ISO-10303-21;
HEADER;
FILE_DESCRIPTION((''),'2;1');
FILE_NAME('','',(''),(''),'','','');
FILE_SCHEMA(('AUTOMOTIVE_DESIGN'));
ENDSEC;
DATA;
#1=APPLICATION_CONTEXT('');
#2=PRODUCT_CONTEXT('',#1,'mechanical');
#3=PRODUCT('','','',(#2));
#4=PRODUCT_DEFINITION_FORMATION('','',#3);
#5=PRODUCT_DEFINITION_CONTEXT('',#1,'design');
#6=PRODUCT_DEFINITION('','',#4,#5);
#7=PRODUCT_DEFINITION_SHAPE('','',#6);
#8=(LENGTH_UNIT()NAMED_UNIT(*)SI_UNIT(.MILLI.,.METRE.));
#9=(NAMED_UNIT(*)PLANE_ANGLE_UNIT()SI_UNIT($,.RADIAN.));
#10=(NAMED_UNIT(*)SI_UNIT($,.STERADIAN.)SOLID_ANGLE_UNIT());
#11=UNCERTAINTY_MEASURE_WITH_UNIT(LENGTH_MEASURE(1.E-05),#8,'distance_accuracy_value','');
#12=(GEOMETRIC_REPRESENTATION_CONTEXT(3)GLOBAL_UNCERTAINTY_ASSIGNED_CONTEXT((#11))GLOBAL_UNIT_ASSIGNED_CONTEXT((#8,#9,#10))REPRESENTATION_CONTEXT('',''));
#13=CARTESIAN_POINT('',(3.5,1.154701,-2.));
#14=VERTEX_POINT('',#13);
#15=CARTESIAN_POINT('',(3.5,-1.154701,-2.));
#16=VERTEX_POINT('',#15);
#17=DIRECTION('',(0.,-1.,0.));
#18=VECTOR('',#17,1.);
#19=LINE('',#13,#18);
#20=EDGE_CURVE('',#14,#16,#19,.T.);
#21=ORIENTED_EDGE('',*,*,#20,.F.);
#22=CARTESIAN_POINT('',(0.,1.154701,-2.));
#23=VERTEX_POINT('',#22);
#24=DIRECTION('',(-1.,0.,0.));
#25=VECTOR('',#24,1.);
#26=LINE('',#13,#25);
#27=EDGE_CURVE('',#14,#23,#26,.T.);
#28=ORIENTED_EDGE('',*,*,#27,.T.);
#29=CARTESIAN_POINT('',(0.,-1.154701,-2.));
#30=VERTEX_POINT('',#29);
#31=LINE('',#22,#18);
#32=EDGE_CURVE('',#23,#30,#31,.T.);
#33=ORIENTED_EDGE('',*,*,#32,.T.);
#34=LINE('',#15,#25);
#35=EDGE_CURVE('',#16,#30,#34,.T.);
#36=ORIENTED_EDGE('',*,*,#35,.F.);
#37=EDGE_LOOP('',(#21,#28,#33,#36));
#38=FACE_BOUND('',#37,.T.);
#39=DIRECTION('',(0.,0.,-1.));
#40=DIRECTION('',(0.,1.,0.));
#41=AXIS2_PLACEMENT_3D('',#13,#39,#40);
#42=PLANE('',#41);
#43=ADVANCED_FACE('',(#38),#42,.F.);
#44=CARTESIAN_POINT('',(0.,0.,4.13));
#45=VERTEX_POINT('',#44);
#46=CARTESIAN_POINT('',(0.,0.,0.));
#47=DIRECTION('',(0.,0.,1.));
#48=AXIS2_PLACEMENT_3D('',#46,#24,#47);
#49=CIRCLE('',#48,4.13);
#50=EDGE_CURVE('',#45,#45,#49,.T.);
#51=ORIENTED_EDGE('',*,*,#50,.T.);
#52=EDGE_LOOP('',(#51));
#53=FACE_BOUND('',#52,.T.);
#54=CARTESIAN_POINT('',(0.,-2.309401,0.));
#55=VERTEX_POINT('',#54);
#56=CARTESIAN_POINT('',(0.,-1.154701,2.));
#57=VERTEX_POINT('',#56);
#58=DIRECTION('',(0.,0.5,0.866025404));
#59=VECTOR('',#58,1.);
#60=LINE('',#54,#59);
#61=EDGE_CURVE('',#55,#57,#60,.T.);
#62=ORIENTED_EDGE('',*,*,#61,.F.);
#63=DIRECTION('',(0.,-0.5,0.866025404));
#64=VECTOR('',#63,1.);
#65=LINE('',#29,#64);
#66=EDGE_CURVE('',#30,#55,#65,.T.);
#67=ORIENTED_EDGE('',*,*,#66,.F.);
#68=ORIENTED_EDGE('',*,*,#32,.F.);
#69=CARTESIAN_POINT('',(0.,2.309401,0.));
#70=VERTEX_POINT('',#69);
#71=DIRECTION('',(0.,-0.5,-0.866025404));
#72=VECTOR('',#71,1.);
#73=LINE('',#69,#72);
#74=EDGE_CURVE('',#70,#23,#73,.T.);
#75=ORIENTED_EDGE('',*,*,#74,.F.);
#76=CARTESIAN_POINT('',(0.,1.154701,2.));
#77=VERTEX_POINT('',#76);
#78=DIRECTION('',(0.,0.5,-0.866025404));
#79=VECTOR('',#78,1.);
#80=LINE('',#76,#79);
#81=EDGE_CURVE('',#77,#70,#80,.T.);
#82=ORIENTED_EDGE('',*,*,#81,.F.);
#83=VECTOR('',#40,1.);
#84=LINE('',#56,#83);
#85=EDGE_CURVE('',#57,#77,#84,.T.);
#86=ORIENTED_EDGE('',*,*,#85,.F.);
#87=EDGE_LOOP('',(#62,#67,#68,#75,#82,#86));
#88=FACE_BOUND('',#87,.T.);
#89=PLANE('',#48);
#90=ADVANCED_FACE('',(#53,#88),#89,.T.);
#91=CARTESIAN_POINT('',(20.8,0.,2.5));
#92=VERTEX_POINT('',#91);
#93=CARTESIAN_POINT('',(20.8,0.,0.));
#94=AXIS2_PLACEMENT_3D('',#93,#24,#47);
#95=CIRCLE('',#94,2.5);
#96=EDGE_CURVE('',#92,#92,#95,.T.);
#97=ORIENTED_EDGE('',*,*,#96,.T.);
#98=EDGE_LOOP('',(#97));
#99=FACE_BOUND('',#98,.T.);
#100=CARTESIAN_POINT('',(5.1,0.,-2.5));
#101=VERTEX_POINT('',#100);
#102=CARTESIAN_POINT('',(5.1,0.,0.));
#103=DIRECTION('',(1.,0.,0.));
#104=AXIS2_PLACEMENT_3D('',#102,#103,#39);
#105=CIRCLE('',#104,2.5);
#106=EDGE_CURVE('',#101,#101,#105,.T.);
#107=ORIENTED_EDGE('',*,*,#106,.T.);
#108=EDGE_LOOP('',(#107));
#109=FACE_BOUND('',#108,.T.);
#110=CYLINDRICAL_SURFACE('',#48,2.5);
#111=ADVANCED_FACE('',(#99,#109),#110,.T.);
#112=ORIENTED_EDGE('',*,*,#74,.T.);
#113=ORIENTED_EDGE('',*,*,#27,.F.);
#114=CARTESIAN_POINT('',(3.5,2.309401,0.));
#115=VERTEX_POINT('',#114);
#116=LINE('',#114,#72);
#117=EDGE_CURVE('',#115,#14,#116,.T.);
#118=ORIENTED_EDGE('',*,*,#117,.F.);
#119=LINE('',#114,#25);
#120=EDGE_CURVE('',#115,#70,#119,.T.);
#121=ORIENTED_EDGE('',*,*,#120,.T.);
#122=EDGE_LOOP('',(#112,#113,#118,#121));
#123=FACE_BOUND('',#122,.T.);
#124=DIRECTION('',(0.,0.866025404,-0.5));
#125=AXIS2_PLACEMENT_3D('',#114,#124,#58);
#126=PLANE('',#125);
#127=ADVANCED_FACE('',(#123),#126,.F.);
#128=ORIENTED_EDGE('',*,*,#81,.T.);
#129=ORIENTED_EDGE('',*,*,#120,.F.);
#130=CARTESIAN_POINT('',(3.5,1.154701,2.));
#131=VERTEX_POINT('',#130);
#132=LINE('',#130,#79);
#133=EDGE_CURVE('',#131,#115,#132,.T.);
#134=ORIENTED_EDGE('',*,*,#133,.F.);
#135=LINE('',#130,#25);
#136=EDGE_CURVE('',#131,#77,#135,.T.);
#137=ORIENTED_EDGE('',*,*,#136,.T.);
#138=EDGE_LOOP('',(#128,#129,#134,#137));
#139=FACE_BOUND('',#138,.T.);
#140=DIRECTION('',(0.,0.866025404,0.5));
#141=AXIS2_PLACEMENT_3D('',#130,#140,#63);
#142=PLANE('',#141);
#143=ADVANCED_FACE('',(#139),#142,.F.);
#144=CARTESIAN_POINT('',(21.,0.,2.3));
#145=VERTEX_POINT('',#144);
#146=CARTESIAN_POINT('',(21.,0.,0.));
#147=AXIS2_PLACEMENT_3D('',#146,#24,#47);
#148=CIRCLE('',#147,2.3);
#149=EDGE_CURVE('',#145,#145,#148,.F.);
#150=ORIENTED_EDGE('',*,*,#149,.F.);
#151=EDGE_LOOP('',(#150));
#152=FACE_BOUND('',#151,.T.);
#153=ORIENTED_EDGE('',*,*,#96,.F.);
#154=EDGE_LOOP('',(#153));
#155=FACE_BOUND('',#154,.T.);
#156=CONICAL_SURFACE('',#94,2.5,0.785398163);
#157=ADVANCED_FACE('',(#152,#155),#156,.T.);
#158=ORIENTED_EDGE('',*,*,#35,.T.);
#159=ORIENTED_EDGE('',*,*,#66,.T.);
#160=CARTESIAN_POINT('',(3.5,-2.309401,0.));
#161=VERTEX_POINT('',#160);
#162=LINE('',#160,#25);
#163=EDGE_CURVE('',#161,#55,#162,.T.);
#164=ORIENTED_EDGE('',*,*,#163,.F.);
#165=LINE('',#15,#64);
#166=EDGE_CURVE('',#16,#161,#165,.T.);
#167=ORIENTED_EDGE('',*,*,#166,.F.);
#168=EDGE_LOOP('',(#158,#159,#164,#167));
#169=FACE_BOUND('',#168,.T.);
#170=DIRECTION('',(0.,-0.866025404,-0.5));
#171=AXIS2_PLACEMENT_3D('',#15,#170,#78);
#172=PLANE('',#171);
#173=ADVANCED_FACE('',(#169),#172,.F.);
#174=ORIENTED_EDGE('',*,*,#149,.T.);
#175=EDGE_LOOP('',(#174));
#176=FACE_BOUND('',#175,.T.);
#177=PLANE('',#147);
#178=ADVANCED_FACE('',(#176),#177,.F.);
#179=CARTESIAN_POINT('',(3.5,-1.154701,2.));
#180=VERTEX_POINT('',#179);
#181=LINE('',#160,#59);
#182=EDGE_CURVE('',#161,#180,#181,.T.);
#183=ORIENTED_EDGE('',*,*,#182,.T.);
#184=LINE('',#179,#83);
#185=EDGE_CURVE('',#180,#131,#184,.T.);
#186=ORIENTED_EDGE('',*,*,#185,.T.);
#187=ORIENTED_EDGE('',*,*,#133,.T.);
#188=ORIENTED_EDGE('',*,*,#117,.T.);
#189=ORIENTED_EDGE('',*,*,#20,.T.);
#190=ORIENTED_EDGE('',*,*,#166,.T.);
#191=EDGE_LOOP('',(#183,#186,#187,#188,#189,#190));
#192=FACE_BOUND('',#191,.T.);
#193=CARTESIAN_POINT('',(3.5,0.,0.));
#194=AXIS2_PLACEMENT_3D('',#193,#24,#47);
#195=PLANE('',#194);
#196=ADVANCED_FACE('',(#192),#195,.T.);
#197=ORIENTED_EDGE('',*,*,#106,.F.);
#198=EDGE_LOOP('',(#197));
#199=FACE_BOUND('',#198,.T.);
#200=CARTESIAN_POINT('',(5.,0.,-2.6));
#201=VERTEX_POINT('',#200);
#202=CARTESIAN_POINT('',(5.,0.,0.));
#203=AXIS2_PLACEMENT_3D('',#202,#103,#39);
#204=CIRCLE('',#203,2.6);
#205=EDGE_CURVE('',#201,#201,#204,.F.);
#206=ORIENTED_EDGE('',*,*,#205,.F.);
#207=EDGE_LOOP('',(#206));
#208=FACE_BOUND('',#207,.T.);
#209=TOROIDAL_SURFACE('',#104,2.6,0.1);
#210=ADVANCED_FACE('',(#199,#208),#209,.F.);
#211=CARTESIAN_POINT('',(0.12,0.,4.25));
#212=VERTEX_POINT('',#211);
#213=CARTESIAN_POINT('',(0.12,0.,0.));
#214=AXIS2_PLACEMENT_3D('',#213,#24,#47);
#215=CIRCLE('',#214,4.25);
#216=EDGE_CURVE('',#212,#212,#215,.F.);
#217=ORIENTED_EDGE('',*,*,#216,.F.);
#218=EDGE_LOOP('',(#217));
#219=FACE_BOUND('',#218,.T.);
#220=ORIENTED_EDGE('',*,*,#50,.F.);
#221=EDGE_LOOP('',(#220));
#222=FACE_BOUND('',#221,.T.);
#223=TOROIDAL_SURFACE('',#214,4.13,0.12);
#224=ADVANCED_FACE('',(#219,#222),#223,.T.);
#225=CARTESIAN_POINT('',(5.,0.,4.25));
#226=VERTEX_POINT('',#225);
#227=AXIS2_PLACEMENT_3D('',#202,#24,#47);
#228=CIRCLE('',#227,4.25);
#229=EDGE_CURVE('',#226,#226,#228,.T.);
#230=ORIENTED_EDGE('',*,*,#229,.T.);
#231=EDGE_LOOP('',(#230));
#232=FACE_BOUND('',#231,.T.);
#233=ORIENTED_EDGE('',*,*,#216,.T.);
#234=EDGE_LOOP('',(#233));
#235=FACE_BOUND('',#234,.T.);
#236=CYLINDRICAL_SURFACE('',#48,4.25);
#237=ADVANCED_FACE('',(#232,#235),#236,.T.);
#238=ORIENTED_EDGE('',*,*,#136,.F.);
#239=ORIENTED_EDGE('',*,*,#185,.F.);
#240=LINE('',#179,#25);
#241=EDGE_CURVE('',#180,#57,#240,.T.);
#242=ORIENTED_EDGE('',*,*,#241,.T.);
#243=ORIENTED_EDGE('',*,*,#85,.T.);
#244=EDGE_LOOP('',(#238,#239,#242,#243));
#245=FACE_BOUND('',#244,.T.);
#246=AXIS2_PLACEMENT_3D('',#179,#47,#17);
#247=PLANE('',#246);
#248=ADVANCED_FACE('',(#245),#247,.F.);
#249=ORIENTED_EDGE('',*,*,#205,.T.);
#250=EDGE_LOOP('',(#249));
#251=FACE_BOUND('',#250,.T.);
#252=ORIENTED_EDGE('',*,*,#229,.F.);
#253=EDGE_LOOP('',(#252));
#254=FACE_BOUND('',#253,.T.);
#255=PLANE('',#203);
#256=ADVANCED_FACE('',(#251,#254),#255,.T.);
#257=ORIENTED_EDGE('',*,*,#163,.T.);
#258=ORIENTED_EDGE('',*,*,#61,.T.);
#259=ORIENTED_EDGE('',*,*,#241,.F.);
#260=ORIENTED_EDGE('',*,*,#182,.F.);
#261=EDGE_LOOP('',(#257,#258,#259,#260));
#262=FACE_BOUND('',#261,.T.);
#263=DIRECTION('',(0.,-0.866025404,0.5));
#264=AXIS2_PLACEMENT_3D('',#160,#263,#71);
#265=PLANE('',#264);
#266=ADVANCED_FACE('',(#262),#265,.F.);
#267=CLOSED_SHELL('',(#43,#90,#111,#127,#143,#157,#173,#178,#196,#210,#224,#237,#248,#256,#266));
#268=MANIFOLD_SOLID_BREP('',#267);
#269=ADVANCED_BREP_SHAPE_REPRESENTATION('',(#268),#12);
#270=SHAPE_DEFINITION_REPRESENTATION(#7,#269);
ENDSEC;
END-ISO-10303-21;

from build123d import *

# Parameters (mm, degrees)
REVOLVE1_OUTLINE_R     = 2.5
REVOLVE1_DEPTH         = 21
REVOLVE1_2_OUTLINE_R   = 4.25
REVOLVE1_2_OUTLINE_R_2 = 2.5
REVOLVE1_2_DEPTH       = 5
FILLET1_R              = 0.1
FILLET2_R              = 0.12
CHAMFER1_SIZE          = 0.2
EXTRUDE1_DEPTH         = 3.5


# Read off the part's stored shape, not the designer's step: Revolve1
with BuildPart() as part:
    # Revolve1 outline → Revolve1 (new body)
    with BuildSketch(Plane.YZ):
        Circle(REVOLVE1_OUTLINE_R)
    extrude(amount=REVOLVE1_DEPTH)

    # Revolve1 2 outline → Revolve1 2 (add)
    with BuildSketch(Plane.YZ):
        Circle(REVOLVE1_2_OUTLINE_R)
        Circle(REVOLVE1_2_OUTLINE_R_2, mode=Mode.SUBTRACT)
    extrude(amount=REVOLVE1_2_DEPTH)

    # Fillet1
    fillet1_edges = [part.edges().sort_by_distance(p)[0] for p in [
        (5, -2.5, 0),
    ]]
    fillet(fillet1_edges, radius=FILLET1_R)

    # Fillet2
    fillet2_edges = [part.edges().sort_by_distance(p)[0] for p in [
        (0, -4.25, 0),
    ]]
    fillet(fillet2_edges, radius=FILLET2_R)

    # Chamfer1
    chamfer1_edges = [part.edges().sort_by_distance(p)[0] for p in [
        (21, -2.5, 0),
    ]]
    chamfer(chamfer1_edges, length=CHAMFER1_SIZE)

    # Sketch2 → Extrude1 (cut)
    with BuildSketch(Plane.ZY):
        Polygon((0, 2.309401077), (-2, 1.154700538), (-2, -1.154700538), (0, -2.309401077), (2, -1.154700538), (2, 1.154700538), align=None)
    extrude(amount=-EXTRUDE1_DEPTH, mode=Mode.SUBTRACT)


solid = part.part
